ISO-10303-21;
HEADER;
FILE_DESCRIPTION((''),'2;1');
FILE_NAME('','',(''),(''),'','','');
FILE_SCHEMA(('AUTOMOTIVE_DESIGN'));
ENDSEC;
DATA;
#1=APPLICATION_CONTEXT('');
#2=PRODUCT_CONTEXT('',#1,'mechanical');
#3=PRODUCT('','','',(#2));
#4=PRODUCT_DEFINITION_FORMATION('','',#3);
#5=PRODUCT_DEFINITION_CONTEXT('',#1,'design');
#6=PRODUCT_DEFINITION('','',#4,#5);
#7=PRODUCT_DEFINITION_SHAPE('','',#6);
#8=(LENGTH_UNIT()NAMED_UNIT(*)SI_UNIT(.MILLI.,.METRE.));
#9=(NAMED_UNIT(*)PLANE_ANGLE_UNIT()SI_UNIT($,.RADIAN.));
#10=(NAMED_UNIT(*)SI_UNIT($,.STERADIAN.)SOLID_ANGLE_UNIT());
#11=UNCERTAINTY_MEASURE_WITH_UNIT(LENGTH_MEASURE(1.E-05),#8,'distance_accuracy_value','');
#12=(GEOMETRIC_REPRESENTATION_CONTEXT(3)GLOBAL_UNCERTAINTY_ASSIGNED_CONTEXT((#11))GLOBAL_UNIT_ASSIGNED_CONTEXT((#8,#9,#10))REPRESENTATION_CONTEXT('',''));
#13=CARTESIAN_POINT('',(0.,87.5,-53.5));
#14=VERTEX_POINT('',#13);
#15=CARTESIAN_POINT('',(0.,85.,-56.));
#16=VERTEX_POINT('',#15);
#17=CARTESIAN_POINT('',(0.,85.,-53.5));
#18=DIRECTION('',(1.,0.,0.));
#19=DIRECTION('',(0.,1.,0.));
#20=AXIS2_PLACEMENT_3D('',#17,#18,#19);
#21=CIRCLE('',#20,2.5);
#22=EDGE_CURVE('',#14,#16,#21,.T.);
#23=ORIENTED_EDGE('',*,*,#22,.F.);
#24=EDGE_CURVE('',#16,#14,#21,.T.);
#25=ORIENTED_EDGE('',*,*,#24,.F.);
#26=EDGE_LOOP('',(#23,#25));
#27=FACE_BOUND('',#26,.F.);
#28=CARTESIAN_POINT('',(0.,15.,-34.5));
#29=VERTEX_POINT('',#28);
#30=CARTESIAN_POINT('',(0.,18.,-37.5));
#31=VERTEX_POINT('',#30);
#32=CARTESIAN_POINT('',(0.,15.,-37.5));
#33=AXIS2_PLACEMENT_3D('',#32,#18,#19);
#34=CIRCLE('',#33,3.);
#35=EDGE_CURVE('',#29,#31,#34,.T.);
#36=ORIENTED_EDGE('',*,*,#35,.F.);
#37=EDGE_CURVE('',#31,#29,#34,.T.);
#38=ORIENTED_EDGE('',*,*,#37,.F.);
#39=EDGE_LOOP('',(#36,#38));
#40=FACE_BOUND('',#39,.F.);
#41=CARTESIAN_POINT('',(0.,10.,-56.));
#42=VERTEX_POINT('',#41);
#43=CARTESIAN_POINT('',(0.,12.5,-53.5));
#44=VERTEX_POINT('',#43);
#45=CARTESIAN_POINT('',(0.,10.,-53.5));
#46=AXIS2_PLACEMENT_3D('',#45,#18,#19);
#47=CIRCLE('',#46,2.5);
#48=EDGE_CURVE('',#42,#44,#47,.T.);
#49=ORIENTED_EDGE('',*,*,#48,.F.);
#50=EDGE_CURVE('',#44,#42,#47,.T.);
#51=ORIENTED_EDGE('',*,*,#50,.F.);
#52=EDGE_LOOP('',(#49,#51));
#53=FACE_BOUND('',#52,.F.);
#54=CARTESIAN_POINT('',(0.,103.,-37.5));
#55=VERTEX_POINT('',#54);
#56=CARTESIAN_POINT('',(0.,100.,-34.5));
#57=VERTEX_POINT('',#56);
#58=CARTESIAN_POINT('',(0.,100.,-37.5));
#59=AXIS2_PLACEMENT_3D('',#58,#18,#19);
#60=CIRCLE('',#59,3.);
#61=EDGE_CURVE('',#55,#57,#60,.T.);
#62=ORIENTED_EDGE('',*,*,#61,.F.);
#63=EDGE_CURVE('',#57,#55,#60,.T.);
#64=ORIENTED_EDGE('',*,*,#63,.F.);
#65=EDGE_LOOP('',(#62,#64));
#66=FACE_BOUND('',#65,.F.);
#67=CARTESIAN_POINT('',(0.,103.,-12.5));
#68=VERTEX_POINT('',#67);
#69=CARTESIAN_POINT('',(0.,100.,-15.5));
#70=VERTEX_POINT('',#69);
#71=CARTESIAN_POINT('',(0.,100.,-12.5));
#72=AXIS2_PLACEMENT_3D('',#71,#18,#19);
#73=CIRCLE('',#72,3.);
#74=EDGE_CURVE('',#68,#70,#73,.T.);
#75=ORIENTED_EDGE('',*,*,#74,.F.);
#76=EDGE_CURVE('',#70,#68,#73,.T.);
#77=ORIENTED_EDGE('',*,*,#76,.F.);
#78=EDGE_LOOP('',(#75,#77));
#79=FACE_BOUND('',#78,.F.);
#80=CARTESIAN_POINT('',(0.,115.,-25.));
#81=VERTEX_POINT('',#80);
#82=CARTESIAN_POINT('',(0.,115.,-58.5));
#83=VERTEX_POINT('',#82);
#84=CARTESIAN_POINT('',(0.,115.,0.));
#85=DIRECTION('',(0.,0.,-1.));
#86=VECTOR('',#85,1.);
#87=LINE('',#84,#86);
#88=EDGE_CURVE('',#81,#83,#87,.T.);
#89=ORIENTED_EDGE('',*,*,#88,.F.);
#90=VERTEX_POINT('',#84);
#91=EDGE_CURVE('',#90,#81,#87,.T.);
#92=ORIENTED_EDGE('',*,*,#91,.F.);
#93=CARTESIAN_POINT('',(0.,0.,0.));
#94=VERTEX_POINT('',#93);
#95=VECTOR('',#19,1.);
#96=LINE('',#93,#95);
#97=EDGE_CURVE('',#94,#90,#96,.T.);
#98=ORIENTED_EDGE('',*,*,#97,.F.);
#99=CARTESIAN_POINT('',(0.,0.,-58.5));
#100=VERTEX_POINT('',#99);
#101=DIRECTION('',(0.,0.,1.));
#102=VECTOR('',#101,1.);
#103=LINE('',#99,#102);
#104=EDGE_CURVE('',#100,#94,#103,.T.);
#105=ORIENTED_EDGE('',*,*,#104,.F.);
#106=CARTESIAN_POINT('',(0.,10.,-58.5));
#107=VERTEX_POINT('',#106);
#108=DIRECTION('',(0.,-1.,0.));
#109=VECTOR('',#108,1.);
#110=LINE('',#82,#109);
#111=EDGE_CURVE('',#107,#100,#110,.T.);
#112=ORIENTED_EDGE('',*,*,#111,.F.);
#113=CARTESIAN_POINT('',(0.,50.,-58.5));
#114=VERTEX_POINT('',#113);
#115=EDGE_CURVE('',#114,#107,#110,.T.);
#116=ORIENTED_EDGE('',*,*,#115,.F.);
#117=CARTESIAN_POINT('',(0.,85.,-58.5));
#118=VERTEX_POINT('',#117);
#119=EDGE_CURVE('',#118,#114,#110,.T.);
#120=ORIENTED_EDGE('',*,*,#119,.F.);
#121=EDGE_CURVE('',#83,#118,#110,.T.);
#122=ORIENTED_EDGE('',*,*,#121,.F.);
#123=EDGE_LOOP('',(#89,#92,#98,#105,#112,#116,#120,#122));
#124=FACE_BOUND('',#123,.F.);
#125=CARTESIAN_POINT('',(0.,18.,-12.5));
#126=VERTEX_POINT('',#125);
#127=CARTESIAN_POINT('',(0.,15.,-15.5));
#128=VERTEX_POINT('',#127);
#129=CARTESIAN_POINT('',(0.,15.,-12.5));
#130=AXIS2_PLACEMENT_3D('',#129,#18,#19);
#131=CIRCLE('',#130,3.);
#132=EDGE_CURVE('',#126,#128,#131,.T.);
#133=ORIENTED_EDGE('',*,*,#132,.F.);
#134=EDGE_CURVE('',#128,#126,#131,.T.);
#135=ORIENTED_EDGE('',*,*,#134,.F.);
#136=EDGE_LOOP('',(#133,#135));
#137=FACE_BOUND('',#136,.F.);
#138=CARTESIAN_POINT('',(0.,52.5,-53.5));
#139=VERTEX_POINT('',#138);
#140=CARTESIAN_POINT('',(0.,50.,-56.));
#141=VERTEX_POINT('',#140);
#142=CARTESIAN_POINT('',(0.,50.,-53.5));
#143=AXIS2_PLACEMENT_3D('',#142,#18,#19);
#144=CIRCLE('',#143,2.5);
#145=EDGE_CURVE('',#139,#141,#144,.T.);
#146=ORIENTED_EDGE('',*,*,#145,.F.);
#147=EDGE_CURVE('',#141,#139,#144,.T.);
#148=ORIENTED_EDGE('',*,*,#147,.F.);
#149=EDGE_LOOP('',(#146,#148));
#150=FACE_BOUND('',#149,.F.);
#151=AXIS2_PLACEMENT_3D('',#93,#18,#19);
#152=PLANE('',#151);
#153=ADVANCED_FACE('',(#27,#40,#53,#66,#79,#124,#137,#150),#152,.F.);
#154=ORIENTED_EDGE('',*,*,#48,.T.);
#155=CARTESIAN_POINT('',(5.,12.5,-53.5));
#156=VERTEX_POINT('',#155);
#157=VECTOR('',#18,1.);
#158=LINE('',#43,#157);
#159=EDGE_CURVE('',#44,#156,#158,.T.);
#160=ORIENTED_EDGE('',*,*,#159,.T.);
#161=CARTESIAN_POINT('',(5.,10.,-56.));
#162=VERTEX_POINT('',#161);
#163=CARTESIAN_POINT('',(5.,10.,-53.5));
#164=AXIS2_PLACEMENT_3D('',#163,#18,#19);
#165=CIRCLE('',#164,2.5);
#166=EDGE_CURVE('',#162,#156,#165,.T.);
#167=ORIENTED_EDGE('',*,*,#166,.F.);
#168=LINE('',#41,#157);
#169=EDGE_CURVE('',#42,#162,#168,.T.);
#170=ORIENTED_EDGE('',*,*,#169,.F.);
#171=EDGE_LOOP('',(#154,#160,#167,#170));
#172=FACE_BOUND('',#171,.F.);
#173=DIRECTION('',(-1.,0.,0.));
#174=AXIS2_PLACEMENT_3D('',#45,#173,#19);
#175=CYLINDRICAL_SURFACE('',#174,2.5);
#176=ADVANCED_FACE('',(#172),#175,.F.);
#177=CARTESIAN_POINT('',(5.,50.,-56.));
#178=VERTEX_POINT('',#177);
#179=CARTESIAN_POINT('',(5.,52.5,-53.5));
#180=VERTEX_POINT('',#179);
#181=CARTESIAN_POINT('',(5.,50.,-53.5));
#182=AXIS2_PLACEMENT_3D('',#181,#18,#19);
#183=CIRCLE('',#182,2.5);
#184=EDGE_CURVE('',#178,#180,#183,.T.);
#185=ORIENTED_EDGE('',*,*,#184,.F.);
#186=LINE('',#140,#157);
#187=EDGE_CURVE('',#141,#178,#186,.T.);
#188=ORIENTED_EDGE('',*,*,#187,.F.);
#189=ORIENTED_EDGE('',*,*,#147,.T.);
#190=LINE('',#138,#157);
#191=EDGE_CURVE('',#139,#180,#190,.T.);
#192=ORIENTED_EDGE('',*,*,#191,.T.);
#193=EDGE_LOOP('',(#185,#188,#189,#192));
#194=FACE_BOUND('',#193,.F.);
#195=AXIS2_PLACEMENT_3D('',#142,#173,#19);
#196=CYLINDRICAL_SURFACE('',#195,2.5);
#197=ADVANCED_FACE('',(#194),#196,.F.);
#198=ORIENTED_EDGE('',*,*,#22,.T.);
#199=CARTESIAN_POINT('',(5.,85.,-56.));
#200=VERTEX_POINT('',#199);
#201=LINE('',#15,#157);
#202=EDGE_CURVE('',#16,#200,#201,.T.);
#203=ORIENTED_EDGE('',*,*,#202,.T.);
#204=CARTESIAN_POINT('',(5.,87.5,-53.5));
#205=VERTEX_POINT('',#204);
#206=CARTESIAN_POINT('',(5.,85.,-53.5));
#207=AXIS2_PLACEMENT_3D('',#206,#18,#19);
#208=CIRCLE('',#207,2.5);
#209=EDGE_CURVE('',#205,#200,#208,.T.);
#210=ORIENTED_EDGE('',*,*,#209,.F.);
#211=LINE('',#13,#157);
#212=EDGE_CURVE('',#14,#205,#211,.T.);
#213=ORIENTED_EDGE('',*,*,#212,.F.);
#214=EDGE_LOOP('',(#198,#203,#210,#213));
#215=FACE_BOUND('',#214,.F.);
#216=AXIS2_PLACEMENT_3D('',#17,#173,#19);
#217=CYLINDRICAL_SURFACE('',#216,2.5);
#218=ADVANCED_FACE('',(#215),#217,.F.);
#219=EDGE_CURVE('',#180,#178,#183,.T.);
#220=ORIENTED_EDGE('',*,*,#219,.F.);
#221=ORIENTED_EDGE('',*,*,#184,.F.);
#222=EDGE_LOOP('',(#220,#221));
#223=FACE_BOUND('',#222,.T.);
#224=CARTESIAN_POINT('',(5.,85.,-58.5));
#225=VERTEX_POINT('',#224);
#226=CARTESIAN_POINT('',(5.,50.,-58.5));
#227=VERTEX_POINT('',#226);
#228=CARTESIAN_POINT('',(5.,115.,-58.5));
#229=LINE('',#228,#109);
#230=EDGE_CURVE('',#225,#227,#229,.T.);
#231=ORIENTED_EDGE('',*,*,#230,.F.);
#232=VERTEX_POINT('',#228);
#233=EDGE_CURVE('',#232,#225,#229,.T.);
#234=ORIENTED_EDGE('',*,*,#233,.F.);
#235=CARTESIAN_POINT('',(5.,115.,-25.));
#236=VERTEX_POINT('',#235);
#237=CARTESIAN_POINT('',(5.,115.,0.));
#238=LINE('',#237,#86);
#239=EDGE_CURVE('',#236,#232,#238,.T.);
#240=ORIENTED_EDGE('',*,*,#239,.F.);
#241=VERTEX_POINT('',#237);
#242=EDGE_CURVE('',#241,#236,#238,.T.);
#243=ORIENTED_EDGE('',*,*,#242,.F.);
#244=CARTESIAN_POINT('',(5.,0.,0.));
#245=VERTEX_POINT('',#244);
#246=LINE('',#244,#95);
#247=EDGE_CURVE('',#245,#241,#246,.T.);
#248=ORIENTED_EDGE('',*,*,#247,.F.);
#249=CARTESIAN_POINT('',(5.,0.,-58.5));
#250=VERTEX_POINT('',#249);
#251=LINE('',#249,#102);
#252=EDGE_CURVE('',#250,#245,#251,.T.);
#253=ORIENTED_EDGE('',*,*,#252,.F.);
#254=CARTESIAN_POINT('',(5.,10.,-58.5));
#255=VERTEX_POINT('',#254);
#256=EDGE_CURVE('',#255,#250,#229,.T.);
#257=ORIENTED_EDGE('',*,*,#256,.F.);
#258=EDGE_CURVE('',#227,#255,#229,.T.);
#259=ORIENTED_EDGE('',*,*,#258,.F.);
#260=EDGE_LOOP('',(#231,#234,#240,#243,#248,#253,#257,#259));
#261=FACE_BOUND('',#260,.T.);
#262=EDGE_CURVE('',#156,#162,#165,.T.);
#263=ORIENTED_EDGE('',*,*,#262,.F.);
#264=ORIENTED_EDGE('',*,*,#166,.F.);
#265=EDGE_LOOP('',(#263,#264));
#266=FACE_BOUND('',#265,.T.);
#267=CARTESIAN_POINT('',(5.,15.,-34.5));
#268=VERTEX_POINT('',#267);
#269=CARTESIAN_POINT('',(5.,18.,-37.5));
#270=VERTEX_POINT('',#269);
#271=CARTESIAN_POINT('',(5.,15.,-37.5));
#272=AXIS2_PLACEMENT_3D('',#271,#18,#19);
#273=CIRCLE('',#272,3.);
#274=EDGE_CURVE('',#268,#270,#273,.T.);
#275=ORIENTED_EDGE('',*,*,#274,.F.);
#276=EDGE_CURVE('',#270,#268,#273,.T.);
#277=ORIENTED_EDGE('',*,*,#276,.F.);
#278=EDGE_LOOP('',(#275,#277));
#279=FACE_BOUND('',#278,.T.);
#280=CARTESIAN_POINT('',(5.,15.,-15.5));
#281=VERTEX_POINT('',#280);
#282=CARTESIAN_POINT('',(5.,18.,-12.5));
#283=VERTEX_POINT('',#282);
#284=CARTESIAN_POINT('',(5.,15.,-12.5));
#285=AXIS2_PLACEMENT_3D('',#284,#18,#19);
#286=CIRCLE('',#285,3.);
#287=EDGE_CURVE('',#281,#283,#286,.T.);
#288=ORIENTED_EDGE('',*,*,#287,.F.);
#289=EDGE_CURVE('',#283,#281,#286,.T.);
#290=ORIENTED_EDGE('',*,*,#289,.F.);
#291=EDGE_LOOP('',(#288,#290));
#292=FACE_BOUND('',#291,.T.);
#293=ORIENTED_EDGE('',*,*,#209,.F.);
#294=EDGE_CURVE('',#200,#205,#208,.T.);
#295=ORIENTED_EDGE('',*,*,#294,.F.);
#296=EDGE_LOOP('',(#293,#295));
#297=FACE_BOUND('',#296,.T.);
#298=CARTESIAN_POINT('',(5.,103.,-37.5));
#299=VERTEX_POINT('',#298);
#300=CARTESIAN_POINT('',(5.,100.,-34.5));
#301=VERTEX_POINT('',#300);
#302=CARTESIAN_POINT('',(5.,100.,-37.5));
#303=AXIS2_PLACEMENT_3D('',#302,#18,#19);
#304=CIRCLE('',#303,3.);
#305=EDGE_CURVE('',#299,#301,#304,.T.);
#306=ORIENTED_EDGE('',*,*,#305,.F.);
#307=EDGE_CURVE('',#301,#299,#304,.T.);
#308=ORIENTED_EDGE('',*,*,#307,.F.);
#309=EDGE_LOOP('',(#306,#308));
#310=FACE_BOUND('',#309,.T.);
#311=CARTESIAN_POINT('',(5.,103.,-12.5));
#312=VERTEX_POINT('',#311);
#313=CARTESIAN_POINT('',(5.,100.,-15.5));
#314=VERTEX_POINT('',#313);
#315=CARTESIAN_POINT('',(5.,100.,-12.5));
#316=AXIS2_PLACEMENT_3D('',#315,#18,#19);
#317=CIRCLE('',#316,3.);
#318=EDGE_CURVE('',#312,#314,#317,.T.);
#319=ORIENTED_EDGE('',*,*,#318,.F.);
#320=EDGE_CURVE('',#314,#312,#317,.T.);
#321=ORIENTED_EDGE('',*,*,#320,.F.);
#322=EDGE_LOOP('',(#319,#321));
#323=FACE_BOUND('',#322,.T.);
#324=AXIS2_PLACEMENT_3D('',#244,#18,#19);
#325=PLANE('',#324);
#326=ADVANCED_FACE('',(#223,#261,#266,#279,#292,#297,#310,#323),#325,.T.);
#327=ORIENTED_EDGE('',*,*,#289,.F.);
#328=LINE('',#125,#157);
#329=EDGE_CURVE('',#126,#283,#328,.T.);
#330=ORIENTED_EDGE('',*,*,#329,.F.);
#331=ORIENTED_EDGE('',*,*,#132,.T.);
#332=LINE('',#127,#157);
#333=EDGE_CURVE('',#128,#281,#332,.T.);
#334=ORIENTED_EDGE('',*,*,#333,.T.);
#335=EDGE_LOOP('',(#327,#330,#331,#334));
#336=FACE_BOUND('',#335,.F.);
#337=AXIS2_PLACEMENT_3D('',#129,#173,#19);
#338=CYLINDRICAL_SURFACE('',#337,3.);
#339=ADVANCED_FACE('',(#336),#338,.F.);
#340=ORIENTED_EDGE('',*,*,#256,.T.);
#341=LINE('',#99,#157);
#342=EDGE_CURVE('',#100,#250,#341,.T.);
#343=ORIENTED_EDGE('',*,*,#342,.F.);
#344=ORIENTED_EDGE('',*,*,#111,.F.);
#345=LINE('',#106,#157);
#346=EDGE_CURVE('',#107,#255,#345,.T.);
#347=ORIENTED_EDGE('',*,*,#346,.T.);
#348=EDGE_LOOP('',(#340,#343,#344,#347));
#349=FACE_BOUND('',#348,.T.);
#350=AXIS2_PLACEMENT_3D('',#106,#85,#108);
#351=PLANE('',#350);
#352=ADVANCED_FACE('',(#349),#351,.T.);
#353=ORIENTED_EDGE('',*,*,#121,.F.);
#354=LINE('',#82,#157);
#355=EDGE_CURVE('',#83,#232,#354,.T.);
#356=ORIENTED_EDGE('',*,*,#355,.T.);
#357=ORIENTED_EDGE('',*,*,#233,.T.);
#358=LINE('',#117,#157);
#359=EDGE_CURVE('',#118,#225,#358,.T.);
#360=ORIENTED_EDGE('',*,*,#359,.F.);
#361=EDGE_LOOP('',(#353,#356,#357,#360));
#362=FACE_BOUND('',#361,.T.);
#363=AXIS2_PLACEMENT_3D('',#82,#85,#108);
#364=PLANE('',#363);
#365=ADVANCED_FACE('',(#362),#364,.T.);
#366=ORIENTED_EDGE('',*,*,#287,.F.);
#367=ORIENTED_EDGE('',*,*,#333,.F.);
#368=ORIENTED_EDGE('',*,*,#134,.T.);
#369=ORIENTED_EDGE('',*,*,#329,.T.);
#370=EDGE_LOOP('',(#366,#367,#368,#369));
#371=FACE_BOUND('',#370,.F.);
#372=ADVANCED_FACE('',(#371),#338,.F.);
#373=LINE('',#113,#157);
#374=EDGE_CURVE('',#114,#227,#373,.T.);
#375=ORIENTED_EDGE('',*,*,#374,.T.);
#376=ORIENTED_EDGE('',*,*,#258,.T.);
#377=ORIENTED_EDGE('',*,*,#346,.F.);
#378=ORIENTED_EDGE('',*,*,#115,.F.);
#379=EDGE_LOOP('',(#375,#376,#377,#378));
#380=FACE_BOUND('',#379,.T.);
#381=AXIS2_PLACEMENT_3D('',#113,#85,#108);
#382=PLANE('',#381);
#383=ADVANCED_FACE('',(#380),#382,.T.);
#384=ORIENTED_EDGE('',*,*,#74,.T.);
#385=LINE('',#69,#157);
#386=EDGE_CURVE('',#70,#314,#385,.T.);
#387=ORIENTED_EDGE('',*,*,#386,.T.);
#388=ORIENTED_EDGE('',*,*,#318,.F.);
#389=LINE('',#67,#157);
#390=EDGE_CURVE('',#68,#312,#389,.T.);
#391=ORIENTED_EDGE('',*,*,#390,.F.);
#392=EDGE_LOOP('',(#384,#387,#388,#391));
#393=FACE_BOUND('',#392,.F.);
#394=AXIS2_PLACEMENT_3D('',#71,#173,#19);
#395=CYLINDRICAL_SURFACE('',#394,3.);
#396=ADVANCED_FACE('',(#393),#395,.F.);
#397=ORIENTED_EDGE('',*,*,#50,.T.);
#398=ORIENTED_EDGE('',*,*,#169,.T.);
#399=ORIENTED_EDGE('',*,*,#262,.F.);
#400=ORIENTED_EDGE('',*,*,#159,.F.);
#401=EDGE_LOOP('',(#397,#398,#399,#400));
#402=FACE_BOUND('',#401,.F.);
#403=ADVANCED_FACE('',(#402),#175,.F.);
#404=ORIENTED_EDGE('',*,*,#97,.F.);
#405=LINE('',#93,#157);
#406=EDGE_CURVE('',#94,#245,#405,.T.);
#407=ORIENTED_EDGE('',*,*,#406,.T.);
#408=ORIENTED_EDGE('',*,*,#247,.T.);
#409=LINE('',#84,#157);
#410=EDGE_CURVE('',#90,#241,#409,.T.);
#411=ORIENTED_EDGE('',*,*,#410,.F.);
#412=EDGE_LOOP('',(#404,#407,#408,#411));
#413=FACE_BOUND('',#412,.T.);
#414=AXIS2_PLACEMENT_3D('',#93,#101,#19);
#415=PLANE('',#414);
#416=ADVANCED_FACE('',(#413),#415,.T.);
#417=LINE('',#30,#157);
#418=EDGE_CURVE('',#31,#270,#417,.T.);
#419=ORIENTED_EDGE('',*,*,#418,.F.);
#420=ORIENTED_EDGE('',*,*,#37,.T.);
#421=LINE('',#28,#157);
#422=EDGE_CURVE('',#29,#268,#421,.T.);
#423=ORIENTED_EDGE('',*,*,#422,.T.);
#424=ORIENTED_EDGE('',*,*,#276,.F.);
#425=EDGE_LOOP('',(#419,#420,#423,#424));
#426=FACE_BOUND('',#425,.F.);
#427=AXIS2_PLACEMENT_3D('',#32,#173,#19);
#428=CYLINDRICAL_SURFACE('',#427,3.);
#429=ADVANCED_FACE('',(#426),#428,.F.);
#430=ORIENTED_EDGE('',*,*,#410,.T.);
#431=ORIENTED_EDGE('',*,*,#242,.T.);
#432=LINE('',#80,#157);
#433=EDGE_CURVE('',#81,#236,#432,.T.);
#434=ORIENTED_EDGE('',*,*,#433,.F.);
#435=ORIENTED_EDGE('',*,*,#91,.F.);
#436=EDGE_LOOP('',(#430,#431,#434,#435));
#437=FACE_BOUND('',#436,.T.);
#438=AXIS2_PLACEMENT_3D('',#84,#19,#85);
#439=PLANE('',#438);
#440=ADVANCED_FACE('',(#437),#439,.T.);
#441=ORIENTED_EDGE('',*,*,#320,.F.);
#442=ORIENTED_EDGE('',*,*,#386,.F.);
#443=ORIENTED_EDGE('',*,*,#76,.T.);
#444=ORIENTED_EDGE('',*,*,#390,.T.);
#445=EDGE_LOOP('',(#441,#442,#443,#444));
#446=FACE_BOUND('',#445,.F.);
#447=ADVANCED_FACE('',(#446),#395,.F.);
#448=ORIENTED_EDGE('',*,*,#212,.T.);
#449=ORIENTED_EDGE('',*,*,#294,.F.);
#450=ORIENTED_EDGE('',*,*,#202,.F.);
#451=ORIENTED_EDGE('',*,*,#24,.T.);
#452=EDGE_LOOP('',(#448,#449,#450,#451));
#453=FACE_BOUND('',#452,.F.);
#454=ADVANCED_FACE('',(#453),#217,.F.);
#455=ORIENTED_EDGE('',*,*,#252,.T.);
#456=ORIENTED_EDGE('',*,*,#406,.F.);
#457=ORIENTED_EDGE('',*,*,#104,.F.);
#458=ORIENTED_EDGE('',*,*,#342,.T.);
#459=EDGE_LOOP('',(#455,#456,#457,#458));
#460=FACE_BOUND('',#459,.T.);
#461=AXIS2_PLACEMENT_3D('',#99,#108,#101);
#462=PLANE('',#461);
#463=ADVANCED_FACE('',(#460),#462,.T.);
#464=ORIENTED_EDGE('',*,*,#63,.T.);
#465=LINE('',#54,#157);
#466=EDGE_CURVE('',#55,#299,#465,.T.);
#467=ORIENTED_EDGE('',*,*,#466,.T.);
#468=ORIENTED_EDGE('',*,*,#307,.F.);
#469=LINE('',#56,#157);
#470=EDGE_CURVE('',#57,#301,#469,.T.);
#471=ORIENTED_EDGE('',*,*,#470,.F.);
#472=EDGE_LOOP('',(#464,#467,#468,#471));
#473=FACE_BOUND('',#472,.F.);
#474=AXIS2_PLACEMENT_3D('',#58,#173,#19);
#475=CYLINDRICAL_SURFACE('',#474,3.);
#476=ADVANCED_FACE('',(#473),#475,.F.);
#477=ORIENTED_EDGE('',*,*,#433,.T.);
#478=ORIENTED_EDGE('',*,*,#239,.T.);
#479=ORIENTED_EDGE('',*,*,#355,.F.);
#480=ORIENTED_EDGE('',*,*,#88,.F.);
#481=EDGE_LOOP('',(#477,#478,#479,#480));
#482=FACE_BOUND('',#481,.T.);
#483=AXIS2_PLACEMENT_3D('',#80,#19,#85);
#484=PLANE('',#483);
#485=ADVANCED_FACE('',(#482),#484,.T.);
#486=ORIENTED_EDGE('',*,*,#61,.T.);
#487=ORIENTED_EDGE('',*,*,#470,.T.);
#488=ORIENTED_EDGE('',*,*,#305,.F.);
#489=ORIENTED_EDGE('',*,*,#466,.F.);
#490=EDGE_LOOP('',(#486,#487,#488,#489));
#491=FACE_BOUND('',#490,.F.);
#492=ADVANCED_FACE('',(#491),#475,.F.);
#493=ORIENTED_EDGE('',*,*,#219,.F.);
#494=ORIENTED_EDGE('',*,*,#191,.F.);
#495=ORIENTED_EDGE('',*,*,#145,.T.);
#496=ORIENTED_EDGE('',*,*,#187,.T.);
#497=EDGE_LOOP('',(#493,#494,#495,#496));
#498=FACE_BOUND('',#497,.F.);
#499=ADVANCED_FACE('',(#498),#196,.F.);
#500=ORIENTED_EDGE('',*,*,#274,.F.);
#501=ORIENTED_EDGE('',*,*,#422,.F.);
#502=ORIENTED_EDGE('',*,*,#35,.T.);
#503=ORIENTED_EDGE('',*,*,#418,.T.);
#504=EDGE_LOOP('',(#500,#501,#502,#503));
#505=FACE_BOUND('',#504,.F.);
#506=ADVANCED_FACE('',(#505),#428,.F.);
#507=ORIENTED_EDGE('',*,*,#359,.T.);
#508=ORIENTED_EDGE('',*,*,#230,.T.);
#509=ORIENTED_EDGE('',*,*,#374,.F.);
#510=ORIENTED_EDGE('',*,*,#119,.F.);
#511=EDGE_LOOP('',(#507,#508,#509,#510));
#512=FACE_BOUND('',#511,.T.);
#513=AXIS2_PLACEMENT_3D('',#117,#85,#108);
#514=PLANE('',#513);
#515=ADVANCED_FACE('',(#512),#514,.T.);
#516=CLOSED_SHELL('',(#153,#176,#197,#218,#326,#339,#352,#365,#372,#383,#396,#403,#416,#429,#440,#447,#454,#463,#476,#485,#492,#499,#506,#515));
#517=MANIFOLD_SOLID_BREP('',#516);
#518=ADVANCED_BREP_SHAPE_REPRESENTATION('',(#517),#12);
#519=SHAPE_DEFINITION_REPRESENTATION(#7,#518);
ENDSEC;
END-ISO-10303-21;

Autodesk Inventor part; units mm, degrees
ref_plane "YZ Plane" through (0, 0, 0) normal (1, 0, 0) x (0, 1, 0)
ref_plane "XZ Plane" through (0, 0, 0) normal (0, 1, 0) x (-1, 0, 0)
ref_plane "XY Plane" through (0, 0, 0) normal (0, 0, 1) x (1, 0, 0)
sketch "Skizze1" plane through (0, 0, 0) normal (1, 0, 0) x (0, 1, 0)
  line L0 (0, 0) -> (115, 0)
  line L1 (115, 0) -> (115, -58.5)
  line L2 (115, -58.5) -> (0, -58.5)
  line L3 (0, -58.5) -> (0, 0)
  line L4 (115, 0) -> (115, -25)
  line L5 (115, -25) -> (100, -25)
  line L6 (100, -25) -> (100, -12.5)
  line L7 (100, -12.5) -> (100, -25)
  line L8 (100, -25) -> (100, -37.5)
  line L9 (100, -25) -> (15, -25)
  line L10 (15, -25) -> (15, -12.5)
  line L11 (15, -12.5) -> (15, -25)
  line L12 (15, -25) -> (15, -37.5)
  circle A0 centre (100, -12.5) radius 3
  circle A1 centre (100, -37.5) radius 3
  circle A2 centre (15, -12.5) radius 3
  circle A3 centre (15, -37.5) radius 3
  line L13 (115, -58.5) -> (85, -58.5)
  line L14 (85, -58.5) -> (50, -58.5)
  line L15 (50, -58.5) -> (10, -58.5)
  line L16 (10, -58.5) -> (10, -53.5)
  line L17 (50, -58.5) -> (50, -53.5)
  line L18 (85, -58.5) -> (85, -53.5)
  circle A4 centre (85, -53.5) radius 2.5
  circle A5 centre (50, -53.5) radius 2.5
  circle A6 centre (10, -53.5) radius 2.5
  dimension "d0" = 115
  dimension "d1" = 58.5
  dimension "d2" = 25
  dimension "d3" = 15
  dimension "d4" = 12.5
  dimension "d5" = 85
  dimension "d6" = 6
  dimension "d7" = 6
  dimension "d8" = 6
  dimension "d9" = 6
  dimension "d10" = 30
  dimension "d11" = 35
  dimension "d12" = 40
  dimension "d13" = 5
  dimension "d14" = 5
  dimension "d15" = 5
  dimension "d16" = 5
  dimension "d17" = 5
  dimension "d18" = 5
extrude "Extrusion1" add sketch "Skizze1" along normal blind 5
properties part number "Motorhalterung_Stützleiste" material "Aluminium 6061"
